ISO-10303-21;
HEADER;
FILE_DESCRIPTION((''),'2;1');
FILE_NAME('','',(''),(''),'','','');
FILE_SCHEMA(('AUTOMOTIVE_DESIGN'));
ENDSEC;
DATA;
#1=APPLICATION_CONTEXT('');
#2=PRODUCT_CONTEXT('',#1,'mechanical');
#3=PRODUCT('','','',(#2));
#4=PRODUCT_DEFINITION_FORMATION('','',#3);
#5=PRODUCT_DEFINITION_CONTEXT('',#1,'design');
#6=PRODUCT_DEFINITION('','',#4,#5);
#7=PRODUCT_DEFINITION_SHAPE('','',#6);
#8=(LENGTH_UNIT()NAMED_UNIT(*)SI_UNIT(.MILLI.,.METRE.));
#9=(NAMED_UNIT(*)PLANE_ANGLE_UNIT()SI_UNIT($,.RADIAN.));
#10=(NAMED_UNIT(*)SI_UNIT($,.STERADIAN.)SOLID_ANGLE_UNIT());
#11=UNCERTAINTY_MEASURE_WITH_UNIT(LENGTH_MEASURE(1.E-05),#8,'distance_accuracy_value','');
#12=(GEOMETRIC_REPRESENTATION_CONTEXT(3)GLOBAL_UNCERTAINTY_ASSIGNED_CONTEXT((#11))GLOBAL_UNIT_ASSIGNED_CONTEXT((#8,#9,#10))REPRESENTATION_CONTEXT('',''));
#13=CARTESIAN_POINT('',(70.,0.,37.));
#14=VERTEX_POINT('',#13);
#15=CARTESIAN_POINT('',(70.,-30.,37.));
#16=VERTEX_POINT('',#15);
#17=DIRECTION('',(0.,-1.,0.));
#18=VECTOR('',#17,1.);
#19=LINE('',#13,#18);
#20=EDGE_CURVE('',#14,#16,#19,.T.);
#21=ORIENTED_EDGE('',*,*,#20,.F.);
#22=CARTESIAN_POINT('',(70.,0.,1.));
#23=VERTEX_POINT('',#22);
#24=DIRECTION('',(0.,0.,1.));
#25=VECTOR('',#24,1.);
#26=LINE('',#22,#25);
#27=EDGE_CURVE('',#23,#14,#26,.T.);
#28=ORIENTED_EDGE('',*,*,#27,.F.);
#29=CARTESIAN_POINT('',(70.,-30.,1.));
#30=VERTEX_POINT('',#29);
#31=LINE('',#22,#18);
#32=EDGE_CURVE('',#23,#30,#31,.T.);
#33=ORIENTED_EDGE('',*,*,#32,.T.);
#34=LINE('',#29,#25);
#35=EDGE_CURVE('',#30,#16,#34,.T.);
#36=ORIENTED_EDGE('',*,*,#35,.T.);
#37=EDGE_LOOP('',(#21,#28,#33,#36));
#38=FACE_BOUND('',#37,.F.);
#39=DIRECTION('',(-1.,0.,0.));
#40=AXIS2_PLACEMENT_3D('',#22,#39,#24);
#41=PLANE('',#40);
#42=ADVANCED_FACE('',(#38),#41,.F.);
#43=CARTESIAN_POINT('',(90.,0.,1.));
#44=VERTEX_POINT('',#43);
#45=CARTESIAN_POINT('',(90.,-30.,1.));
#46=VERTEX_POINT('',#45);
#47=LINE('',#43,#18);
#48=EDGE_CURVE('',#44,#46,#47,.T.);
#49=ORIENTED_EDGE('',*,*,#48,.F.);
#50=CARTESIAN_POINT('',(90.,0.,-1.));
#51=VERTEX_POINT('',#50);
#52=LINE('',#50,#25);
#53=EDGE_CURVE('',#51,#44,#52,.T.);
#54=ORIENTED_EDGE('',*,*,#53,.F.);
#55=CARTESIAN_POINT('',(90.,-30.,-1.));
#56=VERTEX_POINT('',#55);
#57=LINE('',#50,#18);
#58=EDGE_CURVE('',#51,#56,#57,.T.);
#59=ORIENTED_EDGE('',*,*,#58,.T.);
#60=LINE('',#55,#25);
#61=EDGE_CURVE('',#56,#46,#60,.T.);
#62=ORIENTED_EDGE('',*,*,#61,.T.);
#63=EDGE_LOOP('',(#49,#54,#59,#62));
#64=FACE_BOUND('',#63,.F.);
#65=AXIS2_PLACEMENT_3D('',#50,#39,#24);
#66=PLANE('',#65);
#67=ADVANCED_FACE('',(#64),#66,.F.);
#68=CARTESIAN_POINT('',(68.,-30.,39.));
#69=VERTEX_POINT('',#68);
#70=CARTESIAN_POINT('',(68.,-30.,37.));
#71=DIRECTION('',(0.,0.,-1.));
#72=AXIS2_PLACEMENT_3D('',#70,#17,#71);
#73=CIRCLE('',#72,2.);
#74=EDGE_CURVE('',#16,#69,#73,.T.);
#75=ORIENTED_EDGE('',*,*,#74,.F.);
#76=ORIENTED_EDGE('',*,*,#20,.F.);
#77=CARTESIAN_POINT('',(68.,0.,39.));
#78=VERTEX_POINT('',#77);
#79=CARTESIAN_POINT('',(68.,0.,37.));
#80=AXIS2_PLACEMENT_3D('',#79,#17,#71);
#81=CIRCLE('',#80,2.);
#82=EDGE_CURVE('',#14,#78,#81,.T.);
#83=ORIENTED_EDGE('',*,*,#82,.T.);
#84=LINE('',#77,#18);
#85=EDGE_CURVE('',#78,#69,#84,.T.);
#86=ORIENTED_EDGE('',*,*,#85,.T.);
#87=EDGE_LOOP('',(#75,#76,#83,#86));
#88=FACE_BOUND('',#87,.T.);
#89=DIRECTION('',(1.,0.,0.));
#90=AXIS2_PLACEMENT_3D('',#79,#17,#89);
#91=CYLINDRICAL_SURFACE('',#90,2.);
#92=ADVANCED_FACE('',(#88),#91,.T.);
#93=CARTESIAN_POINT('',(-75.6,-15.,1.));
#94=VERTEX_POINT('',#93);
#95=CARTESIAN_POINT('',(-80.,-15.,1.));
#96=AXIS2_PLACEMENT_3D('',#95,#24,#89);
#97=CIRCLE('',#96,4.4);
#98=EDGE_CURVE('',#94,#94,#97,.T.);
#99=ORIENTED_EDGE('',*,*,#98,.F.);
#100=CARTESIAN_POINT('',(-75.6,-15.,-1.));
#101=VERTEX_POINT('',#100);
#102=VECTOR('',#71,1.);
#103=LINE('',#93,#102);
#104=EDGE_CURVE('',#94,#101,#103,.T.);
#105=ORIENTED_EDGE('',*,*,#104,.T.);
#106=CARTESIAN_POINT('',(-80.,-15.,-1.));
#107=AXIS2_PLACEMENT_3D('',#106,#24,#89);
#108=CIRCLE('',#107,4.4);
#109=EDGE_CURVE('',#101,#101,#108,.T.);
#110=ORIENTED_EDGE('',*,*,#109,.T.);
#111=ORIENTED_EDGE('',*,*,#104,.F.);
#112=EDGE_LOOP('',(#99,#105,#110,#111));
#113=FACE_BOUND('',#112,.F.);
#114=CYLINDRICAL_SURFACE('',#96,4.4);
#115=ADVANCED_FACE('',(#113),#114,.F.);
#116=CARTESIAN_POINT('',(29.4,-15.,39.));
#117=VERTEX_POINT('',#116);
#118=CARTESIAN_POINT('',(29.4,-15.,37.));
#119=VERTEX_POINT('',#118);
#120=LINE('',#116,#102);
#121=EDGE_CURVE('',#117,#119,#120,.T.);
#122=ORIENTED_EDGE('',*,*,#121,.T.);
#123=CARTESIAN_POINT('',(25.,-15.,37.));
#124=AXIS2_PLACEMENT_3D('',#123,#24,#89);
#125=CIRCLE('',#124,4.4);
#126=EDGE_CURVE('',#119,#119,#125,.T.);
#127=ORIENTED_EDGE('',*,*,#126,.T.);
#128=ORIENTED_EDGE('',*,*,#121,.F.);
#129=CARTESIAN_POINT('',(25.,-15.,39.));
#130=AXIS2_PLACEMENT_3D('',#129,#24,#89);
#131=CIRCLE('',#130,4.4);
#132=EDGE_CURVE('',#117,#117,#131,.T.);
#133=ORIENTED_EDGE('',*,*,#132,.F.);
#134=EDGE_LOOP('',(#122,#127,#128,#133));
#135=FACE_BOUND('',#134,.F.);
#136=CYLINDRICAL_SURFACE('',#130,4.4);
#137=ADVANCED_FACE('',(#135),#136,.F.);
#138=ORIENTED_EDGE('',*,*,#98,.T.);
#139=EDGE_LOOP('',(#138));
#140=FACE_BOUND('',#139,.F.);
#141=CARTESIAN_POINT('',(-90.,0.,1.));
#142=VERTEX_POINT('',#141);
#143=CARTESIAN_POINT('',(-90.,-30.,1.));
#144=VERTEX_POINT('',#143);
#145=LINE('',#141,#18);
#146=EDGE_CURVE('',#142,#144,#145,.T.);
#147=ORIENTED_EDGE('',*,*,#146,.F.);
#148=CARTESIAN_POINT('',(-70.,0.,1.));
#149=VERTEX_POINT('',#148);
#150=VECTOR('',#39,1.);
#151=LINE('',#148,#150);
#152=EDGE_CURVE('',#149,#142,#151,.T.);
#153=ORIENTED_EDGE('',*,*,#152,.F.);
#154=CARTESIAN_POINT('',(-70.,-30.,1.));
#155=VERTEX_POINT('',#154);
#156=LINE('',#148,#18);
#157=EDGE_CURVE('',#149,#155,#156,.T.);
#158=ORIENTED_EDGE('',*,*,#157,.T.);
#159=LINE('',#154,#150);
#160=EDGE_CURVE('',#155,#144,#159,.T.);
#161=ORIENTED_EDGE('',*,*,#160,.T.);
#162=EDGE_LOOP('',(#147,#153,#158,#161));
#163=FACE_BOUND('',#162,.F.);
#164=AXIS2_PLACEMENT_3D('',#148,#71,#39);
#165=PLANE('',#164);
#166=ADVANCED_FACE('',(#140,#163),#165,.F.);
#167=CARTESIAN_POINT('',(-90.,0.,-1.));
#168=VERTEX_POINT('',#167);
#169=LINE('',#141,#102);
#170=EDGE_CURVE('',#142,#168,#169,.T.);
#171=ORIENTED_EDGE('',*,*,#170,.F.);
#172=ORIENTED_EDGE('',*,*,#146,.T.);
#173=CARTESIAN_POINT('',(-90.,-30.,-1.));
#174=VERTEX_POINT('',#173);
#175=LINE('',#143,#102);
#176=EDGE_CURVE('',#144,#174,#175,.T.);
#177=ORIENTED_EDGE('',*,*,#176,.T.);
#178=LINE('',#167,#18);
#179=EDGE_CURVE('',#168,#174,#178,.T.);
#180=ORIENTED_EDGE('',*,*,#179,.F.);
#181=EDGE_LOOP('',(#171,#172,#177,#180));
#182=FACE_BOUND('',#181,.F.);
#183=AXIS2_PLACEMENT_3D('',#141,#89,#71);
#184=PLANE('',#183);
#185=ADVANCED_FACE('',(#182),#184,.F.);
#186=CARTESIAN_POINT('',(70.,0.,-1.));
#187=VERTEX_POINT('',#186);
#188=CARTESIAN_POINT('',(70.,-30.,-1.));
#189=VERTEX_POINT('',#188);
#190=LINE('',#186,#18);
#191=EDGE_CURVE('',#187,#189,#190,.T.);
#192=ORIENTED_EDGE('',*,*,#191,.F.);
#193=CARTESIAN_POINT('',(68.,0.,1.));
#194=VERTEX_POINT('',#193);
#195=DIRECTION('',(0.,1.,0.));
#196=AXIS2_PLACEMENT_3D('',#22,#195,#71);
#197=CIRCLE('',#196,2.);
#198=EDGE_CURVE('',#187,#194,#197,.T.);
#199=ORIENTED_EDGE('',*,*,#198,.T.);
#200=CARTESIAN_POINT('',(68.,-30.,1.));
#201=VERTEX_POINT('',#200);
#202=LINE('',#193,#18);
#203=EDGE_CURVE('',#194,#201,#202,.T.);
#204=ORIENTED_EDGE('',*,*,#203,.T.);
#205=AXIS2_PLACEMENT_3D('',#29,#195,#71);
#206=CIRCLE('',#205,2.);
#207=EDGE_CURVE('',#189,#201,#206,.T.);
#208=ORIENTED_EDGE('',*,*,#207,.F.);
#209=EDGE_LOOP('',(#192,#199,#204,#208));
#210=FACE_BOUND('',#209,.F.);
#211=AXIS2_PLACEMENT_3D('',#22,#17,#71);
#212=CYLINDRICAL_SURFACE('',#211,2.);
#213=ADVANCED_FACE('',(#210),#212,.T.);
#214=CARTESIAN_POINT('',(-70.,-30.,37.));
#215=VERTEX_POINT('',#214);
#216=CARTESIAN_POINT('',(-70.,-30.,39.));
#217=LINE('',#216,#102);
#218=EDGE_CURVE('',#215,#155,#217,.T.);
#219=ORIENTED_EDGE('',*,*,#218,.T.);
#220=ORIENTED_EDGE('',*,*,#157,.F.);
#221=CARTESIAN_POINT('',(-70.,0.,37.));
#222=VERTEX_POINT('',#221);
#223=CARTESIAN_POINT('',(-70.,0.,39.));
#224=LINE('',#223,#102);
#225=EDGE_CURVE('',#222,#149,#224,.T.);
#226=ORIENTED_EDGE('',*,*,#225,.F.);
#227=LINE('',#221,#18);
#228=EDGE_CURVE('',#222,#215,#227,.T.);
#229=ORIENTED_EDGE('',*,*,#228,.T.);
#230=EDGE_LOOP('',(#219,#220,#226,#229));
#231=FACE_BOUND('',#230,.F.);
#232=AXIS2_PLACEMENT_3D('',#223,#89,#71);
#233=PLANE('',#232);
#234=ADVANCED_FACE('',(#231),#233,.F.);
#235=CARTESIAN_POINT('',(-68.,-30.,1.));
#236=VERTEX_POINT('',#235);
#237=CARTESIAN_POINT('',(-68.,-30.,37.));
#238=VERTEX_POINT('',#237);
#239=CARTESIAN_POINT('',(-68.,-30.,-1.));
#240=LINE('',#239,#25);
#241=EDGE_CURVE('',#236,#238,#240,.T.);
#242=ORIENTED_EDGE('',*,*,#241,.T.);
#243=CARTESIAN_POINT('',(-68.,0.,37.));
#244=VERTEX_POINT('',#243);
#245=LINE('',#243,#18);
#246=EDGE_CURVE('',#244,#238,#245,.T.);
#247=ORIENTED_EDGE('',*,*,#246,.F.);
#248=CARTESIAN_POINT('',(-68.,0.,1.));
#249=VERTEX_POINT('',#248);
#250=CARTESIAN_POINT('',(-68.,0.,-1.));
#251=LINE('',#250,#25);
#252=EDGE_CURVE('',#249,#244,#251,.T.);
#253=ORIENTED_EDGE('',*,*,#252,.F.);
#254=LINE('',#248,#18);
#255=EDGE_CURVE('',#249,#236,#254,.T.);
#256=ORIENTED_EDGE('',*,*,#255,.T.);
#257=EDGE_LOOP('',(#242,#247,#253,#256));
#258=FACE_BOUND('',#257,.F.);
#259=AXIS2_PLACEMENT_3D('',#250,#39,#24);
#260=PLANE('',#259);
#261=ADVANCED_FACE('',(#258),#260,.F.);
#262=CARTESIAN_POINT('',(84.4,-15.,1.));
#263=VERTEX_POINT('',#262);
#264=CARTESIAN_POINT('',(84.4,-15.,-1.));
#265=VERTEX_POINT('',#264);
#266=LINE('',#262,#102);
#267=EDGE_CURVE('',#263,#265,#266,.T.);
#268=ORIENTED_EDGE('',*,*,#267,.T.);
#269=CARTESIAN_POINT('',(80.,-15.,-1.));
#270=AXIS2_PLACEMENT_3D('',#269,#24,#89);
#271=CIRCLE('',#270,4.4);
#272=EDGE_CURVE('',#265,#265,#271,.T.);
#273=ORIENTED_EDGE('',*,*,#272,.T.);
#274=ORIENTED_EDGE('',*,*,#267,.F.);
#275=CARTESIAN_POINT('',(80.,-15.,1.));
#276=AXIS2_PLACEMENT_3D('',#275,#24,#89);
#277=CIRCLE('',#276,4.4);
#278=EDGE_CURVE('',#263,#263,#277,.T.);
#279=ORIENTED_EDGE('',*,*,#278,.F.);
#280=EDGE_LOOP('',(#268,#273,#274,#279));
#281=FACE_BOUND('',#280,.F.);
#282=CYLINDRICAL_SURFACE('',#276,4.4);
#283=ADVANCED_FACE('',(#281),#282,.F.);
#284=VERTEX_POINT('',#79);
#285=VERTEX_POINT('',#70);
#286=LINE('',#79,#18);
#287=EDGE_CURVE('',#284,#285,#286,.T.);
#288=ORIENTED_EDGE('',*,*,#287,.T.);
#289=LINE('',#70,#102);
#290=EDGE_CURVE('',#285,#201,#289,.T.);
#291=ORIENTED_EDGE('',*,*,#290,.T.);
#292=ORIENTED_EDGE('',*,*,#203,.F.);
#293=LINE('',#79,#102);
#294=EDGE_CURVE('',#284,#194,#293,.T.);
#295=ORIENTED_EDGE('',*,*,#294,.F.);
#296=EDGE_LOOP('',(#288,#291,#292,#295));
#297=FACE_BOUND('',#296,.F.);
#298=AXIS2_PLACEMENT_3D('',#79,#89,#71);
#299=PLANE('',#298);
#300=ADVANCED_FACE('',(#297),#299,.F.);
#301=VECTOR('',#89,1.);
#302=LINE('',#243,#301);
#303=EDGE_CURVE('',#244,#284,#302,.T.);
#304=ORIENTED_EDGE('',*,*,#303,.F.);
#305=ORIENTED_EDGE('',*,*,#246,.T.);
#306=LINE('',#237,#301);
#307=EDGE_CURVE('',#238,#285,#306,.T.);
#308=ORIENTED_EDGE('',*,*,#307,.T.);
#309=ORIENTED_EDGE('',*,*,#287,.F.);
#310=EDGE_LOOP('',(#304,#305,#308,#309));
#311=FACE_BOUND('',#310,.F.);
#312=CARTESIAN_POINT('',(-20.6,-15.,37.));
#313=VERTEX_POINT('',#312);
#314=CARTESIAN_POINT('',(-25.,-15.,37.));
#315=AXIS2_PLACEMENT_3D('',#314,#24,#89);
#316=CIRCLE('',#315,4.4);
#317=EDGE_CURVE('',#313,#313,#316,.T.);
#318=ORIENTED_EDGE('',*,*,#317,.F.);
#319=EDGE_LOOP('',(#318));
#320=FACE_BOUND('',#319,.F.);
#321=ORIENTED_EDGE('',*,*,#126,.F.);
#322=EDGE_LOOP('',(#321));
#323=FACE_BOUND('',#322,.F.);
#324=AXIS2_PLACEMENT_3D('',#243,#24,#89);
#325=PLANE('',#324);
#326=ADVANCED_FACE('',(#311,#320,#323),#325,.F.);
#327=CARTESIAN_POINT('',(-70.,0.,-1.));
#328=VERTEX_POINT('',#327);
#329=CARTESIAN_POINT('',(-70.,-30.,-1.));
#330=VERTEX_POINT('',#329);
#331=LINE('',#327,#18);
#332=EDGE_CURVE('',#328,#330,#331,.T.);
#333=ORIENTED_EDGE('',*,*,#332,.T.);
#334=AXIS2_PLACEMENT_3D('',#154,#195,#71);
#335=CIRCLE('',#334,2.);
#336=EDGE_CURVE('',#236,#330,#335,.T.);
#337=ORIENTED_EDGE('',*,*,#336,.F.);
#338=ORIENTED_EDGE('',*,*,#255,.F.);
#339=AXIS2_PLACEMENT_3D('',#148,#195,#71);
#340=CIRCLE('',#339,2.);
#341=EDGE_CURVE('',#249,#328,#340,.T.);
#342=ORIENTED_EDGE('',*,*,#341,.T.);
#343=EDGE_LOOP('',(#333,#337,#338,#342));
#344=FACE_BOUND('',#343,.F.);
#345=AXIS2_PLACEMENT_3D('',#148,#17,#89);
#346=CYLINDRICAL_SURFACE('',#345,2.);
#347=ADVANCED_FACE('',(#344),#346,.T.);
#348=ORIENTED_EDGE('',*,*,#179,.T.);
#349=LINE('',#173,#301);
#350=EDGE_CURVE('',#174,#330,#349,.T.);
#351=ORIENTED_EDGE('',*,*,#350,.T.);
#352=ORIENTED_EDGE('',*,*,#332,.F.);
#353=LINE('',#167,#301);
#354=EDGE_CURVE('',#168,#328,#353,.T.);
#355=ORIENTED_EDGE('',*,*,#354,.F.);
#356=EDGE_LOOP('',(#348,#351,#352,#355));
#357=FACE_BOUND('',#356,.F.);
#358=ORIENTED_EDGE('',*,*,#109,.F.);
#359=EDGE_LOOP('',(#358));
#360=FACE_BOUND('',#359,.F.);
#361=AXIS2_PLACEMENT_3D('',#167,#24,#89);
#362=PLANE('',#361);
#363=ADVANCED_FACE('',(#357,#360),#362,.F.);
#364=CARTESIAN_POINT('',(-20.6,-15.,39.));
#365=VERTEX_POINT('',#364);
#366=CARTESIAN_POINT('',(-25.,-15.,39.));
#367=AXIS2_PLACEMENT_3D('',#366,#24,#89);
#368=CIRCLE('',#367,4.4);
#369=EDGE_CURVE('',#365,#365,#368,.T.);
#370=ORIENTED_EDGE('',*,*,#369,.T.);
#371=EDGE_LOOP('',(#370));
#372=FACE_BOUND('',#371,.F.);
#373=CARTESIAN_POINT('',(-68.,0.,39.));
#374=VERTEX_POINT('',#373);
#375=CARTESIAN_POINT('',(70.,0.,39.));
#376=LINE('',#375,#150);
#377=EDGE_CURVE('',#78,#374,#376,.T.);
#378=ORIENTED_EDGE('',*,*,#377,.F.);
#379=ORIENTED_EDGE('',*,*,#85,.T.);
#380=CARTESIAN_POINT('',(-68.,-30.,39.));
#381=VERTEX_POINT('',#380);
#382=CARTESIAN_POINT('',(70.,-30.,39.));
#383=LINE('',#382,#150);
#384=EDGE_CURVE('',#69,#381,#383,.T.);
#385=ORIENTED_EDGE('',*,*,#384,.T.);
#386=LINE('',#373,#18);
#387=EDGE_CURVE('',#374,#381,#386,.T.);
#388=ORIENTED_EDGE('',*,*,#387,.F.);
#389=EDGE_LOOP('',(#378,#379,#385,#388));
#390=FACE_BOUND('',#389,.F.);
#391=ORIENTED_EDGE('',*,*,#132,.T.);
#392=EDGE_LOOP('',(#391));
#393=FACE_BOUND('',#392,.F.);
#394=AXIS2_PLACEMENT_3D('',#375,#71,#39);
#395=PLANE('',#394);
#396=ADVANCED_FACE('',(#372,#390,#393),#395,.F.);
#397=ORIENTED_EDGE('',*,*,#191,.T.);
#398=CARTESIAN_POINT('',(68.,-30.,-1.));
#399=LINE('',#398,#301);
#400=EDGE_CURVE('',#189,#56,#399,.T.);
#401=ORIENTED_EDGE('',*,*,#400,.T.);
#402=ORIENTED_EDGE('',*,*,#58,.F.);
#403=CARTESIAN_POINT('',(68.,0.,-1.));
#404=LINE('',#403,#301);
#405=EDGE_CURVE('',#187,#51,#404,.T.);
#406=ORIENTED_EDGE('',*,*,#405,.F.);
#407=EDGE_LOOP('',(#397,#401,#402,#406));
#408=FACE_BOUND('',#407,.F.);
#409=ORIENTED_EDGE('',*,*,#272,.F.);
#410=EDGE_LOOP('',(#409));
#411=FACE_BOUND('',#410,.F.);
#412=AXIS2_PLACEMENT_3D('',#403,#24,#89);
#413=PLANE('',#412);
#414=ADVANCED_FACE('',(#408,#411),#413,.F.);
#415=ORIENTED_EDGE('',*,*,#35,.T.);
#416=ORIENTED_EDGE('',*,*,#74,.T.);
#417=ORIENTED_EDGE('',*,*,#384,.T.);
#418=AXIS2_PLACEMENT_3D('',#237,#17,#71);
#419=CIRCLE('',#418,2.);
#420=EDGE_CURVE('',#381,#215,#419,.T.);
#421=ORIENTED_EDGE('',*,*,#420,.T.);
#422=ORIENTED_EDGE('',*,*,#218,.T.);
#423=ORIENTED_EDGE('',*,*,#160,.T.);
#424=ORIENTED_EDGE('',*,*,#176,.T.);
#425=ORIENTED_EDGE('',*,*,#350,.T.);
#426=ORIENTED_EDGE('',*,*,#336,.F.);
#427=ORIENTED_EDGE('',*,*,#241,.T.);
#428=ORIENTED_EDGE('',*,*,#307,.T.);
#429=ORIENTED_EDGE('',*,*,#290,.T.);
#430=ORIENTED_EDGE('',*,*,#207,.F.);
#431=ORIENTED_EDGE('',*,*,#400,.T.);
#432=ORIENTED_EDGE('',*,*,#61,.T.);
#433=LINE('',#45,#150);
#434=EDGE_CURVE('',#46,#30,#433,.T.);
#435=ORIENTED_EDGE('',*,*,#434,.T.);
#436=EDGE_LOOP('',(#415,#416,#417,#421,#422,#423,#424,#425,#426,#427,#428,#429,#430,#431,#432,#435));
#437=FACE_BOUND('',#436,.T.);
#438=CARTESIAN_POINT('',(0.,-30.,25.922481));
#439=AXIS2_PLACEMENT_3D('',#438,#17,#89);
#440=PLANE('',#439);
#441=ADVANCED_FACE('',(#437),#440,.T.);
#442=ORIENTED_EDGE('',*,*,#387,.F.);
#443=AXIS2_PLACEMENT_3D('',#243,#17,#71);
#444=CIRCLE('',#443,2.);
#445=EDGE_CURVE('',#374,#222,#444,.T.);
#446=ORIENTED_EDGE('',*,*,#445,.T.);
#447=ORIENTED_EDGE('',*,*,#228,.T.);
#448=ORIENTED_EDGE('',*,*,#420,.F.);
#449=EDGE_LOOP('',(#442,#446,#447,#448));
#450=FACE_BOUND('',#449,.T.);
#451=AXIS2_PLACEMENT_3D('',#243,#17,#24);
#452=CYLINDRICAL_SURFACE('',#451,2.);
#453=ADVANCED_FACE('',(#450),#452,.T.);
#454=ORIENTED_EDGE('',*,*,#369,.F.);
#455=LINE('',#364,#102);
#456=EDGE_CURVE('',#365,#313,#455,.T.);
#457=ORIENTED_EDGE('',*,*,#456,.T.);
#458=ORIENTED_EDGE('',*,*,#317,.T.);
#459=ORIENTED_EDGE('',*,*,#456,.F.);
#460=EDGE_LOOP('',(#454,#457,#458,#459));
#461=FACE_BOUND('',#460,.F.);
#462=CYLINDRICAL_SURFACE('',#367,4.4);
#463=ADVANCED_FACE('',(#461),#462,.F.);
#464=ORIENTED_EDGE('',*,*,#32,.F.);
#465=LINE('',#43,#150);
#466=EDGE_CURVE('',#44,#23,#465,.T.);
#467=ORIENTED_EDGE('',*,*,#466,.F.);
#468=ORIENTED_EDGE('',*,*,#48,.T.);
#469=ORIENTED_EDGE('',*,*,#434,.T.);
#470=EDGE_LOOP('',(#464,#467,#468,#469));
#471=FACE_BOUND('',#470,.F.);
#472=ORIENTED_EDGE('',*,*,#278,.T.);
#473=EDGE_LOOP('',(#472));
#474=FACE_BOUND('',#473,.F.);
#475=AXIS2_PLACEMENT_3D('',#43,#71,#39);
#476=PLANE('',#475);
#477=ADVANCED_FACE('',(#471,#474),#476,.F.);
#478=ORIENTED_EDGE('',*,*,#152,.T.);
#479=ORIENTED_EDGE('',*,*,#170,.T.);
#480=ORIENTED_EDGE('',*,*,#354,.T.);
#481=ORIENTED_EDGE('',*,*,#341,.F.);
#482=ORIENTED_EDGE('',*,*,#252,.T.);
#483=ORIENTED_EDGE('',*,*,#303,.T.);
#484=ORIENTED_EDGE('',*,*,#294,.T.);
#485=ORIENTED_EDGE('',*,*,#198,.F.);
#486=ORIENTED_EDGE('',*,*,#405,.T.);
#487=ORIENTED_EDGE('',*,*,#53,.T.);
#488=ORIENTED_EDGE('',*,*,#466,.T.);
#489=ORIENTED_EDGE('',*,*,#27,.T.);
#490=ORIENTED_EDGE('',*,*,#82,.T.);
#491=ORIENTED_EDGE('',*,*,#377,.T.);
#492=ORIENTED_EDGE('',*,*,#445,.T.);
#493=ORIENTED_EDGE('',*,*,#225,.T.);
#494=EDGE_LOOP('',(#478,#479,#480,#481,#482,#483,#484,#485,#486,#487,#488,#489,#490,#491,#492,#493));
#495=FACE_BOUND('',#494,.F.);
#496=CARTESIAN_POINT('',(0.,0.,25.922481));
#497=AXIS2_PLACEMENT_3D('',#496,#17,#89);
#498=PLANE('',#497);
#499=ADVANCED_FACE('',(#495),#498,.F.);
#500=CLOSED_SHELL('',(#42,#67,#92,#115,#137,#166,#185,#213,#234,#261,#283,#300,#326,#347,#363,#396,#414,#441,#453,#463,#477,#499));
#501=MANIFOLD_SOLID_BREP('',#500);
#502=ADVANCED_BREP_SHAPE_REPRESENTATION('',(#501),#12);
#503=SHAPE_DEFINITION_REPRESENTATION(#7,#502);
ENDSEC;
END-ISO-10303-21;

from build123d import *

# Parameters (mm, degrees)
F1_DEPTH = 30
F2_R     = 4.4
F3_R     = 4.4
F4_DEPTH = 25
F5_R     = 2
F6_R     = 2


# Not quite as in the source:
# - a feature names something its author has since deleted; it is built from what else it names


with BuildPart() as f1:
    # F0 (on Front) → F1 (new body)
    with BuildSketch(Plane.XZ):
        Polygon((90, -1), (90, 1), (70, 1), (70, 39), (-70, 39), (-70, 1), (-90, 1), (-90, -1), (-68, -1), (-68, 37), (68, 37), (68, -1), align=None)
    extrude(amount=F1_DEPTH)

    # F2 (on face) + F3 (on face) → F4 (cut)
    with BuildSketch(Plane.XY.offset(1)):
        with Locations((-80, -15)):
            Circle(F2_R)
        with Locations((80, -15)):
            Circle(F2_R)
    with BuildSketch(Plane.XY.offset(39)):
        with Locations((-25, -15)):
            Circle(F3_R)
        with Locations((25, -15)):
            Circle(F3_R)
    extrude(amount=-F4_DEPTH, mode=Mode.SUBTRACT)

    # F5
    f5_edges = [f1.edges().sort_by_distance(p)[0] for p in [
        (-70, -15, 39),
        (70, -15, 39),
    ]]
    fillet(f5_edges, radius=F5_R)

    # F6
    f6_edges = [f1.edges().sort_by_distance(p)[0] for p in [
        (68, -15, -1),
        (-68, -15, -1),
    ]]
    fillet(f6_edges, radius=F6_R)


solid = f1.part
